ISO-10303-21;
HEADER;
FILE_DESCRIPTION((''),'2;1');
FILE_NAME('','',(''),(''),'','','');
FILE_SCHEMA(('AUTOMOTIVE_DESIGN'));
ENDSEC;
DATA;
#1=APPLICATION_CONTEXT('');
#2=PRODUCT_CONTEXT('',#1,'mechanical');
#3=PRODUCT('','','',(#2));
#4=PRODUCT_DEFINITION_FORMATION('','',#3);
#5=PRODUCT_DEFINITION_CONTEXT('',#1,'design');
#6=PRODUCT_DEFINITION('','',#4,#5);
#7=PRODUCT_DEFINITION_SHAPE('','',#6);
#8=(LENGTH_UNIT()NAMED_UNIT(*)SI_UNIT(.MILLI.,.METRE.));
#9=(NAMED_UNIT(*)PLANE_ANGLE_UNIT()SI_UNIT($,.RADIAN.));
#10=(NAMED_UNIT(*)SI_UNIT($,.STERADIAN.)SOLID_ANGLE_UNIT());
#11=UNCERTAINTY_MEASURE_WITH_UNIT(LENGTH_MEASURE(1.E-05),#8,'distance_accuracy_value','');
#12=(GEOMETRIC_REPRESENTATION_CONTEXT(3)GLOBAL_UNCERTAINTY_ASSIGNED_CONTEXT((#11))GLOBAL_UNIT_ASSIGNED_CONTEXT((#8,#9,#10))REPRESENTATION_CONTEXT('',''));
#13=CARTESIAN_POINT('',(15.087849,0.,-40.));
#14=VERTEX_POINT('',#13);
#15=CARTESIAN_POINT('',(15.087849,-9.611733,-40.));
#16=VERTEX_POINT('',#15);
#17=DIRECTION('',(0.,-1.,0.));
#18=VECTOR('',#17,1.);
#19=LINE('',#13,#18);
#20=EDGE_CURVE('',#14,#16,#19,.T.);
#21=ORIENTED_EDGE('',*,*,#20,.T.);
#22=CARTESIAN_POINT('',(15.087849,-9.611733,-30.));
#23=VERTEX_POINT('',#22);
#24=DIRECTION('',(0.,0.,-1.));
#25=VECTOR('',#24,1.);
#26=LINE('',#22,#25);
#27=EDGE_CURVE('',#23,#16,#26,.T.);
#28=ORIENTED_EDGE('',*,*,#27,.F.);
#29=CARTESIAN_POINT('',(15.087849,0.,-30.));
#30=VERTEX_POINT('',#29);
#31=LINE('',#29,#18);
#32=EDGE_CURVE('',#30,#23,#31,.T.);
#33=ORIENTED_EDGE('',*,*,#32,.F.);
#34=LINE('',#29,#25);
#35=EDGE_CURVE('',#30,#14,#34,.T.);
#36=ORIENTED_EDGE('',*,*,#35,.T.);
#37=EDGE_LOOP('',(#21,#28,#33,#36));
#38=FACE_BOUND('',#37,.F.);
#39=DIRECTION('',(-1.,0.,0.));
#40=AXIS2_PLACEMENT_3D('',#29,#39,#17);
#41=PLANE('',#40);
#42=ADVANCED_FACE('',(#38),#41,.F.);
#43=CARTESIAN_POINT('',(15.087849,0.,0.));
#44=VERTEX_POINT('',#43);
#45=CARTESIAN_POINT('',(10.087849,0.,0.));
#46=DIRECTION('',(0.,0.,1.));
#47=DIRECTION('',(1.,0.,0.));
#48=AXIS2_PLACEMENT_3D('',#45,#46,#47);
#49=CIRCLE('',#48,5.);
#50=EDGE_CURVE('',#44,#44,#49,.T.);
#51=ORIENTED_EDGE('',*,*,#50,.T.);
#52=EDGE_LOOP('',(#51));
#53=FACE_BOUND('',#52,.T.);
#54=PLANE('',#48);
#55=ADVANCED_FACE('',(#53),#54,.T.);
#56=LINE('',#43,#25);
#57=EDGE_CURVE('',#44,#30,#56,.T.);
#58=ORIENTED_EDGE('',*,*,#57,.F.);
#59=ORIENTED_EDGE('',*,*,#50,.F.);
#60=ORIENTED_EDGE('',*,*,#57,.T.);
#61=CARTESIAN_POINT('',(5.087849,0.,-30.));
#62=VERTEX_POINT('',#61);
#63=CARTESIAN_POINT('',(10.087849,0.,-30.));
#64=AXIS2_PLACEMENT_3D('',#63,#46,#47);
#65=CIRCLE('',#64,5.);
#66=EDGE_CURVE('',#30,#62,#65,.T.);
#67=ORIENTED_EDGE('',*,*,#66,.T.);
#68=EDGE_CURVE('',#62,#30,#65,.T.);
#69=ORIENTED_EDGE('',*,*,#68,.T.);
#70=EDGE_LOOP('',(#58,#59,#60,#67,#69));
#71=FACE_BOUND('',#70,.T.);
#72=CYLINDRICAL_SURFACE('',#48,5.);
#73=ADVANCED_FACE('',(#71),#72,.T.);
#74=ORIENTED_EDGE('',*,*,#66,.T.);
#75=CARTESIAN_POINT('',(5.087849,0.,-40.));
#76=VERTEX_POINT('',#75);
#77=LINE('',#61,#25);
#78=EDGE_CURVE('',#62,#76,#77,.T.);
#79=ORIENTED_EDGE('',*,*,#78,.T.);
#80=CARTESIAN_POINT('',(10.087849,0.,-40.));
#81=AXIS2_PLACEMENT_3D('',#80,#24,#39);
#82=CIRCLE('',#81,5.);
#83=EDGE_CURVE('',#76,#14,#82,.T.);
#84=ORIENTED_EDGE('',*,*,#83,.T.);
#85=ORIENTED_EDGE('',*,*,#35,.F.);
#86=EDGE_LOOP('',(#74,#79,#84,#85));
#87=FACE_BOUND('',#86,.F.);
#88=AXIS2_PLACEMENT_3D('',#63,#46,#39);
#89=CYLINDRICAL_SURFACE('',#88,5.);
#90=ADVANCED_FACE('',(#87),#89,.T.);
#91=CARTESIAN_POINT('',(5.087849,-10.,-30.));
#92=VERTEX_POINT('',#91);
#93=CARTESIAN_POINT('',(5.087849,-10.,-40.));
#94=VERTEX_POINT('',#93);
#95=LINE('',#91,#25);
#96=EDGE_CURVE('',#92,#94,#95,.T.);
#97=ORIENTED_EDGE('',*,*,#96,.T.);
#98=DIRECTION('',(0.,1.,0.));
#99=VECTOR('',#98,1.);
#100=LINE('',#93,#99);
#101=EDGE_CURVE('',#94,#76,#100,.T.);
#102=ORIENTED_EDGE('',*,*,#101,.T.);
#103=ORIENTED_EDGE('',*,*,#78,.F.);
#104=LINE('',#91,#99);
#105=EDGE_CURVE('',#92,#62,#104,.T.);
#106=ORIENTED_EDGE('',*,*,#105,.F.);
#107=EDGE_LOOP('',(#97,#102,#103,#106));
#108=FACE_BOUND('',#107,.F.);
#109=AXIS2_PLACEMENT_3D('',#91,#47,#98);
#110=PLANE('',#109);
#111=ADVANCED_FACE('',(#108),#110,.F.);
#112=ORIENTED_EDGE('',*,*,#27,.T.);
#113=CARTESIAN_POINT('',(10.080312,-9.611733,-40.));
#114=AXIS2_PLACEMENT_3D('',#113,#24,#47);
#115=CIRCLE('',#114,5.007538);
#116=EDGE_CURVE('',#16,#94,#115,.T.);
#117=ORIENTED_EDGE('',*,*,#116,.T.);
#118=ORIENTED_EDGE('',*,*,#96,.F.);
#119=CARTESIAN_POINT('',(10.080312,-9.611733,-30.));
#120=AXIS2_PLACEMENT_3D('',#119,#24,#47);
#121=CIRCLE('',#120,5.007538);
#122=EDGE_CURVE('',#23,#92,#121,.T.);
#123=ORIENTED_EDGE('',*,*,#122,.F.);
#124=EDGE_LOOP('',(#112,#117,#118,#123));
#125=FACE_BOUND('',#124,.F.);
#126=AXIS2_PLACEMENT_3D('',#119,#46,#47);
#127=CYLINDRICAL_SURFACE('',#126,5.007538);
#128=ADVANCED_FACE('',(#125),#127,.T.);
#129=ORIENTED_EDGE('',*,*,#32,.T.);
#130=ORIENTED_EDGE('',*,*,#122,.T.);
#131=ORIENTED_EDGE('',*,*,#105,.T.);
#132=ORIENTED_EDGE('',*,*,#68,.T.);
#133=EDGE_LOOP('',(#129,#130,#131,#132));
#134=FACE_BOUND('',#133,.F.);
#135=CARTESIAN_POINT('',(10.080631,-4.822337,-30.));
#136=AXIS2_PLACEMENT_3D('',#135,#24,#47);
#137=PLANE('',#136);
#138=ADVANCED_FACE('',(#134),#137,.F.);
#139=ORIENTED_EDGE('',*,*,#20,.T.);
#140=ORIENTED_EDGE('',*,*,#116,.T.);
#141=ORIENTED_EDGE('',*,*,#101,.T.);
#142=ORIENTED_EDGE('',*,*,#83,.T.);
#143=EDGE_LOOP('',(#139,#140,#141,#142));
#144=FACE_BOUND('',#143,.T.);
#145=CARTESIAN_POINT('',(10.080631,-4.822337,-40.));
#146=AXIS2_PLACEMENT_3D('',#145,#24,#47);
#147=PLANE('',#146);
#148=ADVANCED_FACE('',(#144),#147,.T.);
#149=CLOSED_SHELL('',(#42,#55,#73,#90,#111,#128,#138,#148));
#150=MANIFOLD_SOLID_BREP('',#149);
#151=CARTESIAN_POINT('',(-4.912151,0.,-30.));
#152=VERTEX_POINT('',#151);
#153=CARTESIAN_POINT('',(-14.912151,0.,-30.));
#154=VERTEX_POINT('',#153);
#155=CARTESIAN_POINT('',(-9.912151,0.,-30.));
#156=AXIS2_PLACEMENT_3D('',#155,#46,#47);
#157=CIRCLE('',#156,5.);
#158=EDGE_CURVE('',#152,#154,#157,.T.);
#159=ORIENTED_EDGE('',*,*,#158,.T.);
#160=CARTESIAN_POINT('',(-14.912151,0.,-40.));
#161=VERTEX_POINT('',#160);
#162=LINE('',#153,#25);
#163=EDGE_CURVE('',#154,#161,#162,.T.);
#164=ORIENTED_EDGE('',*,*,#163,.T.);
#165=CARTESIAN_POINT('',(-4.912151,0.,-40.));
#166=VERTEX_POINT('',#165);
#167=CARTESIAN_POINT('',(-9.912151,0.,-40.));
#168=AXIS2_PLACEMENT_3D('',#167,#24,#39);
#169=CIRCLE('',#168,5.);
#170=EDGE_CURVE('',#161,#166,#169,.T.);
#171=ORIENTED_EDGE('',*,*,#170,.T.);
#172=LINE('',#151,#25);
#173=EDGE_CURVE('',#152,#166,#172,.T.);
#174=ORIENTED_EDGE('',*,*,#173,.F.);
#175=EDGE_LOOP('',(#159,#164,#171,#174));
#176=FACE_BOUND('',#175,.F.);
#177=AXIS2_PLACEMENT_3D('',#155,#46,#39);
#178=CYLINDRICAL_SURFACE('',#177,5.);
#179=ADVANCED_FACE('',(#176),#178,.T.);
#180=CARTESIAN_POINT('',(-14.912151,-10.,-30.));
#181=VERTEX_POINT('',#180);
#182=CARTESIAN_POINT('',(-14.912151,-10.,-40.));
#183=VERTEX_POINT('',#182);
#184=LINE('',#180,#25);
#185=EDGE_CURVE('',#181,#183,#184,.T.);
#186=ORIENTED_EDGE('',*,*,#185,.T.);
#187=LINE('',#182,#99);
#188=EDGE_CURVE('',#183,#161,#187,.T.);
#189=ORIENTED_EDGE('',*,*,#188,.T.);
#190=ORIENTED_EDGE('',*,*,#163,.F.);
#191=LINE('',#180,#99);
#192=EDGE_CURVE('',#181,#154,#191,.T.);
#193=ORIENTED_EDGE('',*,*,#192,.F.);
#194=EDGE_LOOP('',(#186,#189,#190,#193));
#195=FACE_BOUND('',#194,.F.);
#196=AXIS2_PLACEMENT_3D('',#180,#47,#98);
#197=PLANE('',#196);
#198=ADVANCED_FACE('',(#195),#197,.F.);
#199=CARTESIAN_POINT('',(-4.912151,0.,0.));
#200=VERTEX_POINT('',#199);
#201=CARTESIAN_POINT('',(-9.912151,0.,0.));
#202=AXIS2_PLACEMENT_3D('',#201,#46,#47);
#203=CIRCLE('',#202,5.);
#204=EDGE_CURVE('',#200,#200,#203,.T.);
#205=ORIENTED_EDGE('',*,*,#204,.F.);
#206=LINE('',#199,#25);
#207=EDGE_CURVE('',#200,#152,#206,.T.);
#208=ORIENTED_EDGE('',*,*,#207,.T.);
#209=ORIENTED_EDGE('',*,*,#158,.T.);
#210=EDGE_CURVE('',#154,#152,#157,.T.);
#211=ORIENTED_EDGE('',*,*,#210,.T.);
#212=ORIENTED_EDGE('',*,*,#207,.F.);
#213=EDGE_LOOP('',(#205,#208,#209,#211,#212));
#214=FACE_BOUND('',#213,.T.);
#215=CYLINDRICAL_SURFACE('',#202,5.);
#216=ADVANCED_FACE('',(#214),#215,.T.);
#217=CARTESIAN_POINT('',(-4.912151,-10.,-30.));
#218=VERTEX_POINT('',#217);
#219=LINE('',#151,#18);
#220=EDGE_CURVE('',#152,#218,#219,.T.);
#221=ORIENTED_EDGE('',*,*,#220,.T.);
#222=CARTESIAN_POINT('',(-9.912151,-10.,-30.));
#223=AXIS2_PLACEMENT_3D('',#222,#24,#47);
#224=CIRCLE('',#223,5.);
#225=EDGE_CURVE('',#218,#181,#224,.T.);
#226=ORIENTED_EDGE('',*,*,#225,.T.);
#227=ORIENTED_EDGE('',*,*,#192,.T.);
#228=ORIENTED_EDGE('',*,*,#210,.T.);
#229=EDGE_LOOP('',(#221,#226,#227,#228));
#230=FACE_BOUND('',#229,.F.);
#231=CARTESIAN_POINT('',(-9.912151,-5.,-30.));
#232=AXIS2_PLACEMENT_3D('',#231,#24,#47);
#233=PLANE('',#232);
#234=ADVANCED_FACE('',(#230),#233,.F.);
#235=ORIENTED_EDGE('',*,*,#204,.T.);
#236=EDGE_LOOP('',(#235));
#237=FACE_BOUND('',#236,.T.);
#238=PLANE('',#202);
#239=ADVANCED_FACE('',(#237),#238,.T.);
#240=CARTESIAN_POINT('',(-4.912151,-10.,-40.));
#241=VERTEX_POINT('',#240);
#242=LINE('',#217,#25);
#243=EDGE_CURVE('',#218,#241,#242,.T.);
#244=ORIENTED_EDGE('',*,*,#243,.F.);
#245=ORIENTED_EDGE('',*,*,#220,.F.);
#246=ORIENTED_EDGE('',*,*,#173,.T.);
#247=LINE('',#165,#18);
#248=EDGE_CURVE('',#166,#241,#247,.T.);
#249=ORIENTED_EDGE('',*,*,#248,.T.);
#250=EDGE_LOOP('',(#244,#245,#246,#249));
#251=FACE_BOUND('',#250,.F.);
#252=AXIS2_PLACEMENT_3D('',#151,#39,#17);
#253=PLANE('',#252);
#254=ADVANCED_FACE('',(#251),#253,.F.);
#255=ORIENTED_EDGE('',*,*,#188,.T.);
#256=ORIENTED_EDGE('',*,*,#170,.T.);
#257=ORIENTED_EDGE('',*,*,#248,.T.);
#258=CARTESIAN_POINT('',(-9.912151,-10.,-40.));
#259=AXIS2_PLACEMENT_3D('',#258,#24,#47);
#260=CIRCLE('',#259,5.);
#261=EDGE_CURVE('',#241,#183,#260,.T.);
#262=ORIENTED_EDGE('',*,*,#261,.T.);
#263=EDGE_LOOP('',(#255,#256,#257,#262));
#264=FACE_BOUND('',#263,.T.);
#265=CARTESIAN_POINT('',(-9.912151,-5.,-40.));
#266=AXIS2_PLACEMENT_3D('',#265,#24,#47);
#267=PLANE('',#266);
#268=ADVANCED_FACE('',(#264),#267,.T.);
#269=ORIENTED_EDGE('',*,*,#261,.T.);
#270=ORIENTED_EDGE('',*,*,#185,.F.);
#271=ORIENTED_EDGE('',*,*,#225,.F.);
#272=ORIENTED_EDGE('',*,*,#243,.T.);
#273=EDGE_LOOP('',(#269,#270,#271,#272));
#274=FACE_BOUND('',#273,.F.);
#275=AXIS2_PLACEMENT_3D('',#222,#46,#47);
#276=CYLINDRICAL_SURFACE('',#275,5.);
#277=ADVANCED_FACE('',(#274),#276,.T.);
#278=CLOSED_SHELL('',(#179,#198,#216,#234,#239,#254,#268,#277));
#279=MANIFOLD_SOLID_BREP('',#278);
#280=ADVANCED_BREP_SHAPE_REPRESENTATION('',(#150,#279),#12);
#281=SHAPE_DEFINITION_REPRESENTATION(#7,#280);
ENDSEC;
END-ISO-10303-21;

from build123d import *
from build123d import SkipClean  # not in build123d's __all__

# Parameters (mm, degrees)
F0_R     = 5
F1_DEPTH = 30
F3_DEPTH = 10
F5_DEPTH = 10


with BuildPart() as f1:
    # F0 (on Top) → F1 (new body)
    with BuildSketch(Plane.XY):
        with Locations((10.087849088, 0)):
            Circle(F0_R)
    extrude(amount=-F1_DEPTH)

    # F4 (on face) → F5 (join)
    with BuildSketch(Plane(origin=(0, 0, -30), x_dir=(1, 0, 0), z_dir=(0, 0, -1))):
        with BuildLine():
            Line((5.087849088, 10), (5.087849088, 0))
            ThreePointArc((5.087849088, 0), (10.087849088, -5), (15.087849088, 0))
            Line((15.087849088, 0), (15.087849088, 9.61173255))
            ThreePointArc((15.087849088, 9.61173255), (10.2745915071, 14.615499921), (5.087849088, 10))
        make_face()
    with SkipClean():  # cleaning this boolean's faces spoils the solid; the shape is the same uncleaned
        extrude(amount=F5_DEPTH)


with BuildPart() as f1b:
    # F0 (on Top) → F1, piece 2 (new body)
    with BuildSketch(Plane.XY):
        with Locations((-9.912150912, 0)):
            Circle(F0_R)
    extrude(amount=-F1_DEPTH)

    # F2 (on face) → F3 (join)
    with BuildSketch(Plane(origin=(0, 0, -30), x_dir=(1, 0, 0), z_dir=(0, 0, -1))):
        with BuildLine():
            Line((-14.912150912, 10), (-14.912150912, 0))
            ThreePointArc((-14.912150912, 0), (-9.912150912, -5), (-4.912150912, 0))
            Line((-4.912150912, 0), (-4.912150912, 10))
            ThreePointArc((-4.912150912, 10), (-9.912150912, 15), (-14.912150912, 10))
        make_face()
    with SkipClean():  # cleaning this boolean's faces spoils the solid; the shape is the same uncleaned
        extrude(amount=F3_DEPTH)


solid = Compound([f1.part, f1b.part])
